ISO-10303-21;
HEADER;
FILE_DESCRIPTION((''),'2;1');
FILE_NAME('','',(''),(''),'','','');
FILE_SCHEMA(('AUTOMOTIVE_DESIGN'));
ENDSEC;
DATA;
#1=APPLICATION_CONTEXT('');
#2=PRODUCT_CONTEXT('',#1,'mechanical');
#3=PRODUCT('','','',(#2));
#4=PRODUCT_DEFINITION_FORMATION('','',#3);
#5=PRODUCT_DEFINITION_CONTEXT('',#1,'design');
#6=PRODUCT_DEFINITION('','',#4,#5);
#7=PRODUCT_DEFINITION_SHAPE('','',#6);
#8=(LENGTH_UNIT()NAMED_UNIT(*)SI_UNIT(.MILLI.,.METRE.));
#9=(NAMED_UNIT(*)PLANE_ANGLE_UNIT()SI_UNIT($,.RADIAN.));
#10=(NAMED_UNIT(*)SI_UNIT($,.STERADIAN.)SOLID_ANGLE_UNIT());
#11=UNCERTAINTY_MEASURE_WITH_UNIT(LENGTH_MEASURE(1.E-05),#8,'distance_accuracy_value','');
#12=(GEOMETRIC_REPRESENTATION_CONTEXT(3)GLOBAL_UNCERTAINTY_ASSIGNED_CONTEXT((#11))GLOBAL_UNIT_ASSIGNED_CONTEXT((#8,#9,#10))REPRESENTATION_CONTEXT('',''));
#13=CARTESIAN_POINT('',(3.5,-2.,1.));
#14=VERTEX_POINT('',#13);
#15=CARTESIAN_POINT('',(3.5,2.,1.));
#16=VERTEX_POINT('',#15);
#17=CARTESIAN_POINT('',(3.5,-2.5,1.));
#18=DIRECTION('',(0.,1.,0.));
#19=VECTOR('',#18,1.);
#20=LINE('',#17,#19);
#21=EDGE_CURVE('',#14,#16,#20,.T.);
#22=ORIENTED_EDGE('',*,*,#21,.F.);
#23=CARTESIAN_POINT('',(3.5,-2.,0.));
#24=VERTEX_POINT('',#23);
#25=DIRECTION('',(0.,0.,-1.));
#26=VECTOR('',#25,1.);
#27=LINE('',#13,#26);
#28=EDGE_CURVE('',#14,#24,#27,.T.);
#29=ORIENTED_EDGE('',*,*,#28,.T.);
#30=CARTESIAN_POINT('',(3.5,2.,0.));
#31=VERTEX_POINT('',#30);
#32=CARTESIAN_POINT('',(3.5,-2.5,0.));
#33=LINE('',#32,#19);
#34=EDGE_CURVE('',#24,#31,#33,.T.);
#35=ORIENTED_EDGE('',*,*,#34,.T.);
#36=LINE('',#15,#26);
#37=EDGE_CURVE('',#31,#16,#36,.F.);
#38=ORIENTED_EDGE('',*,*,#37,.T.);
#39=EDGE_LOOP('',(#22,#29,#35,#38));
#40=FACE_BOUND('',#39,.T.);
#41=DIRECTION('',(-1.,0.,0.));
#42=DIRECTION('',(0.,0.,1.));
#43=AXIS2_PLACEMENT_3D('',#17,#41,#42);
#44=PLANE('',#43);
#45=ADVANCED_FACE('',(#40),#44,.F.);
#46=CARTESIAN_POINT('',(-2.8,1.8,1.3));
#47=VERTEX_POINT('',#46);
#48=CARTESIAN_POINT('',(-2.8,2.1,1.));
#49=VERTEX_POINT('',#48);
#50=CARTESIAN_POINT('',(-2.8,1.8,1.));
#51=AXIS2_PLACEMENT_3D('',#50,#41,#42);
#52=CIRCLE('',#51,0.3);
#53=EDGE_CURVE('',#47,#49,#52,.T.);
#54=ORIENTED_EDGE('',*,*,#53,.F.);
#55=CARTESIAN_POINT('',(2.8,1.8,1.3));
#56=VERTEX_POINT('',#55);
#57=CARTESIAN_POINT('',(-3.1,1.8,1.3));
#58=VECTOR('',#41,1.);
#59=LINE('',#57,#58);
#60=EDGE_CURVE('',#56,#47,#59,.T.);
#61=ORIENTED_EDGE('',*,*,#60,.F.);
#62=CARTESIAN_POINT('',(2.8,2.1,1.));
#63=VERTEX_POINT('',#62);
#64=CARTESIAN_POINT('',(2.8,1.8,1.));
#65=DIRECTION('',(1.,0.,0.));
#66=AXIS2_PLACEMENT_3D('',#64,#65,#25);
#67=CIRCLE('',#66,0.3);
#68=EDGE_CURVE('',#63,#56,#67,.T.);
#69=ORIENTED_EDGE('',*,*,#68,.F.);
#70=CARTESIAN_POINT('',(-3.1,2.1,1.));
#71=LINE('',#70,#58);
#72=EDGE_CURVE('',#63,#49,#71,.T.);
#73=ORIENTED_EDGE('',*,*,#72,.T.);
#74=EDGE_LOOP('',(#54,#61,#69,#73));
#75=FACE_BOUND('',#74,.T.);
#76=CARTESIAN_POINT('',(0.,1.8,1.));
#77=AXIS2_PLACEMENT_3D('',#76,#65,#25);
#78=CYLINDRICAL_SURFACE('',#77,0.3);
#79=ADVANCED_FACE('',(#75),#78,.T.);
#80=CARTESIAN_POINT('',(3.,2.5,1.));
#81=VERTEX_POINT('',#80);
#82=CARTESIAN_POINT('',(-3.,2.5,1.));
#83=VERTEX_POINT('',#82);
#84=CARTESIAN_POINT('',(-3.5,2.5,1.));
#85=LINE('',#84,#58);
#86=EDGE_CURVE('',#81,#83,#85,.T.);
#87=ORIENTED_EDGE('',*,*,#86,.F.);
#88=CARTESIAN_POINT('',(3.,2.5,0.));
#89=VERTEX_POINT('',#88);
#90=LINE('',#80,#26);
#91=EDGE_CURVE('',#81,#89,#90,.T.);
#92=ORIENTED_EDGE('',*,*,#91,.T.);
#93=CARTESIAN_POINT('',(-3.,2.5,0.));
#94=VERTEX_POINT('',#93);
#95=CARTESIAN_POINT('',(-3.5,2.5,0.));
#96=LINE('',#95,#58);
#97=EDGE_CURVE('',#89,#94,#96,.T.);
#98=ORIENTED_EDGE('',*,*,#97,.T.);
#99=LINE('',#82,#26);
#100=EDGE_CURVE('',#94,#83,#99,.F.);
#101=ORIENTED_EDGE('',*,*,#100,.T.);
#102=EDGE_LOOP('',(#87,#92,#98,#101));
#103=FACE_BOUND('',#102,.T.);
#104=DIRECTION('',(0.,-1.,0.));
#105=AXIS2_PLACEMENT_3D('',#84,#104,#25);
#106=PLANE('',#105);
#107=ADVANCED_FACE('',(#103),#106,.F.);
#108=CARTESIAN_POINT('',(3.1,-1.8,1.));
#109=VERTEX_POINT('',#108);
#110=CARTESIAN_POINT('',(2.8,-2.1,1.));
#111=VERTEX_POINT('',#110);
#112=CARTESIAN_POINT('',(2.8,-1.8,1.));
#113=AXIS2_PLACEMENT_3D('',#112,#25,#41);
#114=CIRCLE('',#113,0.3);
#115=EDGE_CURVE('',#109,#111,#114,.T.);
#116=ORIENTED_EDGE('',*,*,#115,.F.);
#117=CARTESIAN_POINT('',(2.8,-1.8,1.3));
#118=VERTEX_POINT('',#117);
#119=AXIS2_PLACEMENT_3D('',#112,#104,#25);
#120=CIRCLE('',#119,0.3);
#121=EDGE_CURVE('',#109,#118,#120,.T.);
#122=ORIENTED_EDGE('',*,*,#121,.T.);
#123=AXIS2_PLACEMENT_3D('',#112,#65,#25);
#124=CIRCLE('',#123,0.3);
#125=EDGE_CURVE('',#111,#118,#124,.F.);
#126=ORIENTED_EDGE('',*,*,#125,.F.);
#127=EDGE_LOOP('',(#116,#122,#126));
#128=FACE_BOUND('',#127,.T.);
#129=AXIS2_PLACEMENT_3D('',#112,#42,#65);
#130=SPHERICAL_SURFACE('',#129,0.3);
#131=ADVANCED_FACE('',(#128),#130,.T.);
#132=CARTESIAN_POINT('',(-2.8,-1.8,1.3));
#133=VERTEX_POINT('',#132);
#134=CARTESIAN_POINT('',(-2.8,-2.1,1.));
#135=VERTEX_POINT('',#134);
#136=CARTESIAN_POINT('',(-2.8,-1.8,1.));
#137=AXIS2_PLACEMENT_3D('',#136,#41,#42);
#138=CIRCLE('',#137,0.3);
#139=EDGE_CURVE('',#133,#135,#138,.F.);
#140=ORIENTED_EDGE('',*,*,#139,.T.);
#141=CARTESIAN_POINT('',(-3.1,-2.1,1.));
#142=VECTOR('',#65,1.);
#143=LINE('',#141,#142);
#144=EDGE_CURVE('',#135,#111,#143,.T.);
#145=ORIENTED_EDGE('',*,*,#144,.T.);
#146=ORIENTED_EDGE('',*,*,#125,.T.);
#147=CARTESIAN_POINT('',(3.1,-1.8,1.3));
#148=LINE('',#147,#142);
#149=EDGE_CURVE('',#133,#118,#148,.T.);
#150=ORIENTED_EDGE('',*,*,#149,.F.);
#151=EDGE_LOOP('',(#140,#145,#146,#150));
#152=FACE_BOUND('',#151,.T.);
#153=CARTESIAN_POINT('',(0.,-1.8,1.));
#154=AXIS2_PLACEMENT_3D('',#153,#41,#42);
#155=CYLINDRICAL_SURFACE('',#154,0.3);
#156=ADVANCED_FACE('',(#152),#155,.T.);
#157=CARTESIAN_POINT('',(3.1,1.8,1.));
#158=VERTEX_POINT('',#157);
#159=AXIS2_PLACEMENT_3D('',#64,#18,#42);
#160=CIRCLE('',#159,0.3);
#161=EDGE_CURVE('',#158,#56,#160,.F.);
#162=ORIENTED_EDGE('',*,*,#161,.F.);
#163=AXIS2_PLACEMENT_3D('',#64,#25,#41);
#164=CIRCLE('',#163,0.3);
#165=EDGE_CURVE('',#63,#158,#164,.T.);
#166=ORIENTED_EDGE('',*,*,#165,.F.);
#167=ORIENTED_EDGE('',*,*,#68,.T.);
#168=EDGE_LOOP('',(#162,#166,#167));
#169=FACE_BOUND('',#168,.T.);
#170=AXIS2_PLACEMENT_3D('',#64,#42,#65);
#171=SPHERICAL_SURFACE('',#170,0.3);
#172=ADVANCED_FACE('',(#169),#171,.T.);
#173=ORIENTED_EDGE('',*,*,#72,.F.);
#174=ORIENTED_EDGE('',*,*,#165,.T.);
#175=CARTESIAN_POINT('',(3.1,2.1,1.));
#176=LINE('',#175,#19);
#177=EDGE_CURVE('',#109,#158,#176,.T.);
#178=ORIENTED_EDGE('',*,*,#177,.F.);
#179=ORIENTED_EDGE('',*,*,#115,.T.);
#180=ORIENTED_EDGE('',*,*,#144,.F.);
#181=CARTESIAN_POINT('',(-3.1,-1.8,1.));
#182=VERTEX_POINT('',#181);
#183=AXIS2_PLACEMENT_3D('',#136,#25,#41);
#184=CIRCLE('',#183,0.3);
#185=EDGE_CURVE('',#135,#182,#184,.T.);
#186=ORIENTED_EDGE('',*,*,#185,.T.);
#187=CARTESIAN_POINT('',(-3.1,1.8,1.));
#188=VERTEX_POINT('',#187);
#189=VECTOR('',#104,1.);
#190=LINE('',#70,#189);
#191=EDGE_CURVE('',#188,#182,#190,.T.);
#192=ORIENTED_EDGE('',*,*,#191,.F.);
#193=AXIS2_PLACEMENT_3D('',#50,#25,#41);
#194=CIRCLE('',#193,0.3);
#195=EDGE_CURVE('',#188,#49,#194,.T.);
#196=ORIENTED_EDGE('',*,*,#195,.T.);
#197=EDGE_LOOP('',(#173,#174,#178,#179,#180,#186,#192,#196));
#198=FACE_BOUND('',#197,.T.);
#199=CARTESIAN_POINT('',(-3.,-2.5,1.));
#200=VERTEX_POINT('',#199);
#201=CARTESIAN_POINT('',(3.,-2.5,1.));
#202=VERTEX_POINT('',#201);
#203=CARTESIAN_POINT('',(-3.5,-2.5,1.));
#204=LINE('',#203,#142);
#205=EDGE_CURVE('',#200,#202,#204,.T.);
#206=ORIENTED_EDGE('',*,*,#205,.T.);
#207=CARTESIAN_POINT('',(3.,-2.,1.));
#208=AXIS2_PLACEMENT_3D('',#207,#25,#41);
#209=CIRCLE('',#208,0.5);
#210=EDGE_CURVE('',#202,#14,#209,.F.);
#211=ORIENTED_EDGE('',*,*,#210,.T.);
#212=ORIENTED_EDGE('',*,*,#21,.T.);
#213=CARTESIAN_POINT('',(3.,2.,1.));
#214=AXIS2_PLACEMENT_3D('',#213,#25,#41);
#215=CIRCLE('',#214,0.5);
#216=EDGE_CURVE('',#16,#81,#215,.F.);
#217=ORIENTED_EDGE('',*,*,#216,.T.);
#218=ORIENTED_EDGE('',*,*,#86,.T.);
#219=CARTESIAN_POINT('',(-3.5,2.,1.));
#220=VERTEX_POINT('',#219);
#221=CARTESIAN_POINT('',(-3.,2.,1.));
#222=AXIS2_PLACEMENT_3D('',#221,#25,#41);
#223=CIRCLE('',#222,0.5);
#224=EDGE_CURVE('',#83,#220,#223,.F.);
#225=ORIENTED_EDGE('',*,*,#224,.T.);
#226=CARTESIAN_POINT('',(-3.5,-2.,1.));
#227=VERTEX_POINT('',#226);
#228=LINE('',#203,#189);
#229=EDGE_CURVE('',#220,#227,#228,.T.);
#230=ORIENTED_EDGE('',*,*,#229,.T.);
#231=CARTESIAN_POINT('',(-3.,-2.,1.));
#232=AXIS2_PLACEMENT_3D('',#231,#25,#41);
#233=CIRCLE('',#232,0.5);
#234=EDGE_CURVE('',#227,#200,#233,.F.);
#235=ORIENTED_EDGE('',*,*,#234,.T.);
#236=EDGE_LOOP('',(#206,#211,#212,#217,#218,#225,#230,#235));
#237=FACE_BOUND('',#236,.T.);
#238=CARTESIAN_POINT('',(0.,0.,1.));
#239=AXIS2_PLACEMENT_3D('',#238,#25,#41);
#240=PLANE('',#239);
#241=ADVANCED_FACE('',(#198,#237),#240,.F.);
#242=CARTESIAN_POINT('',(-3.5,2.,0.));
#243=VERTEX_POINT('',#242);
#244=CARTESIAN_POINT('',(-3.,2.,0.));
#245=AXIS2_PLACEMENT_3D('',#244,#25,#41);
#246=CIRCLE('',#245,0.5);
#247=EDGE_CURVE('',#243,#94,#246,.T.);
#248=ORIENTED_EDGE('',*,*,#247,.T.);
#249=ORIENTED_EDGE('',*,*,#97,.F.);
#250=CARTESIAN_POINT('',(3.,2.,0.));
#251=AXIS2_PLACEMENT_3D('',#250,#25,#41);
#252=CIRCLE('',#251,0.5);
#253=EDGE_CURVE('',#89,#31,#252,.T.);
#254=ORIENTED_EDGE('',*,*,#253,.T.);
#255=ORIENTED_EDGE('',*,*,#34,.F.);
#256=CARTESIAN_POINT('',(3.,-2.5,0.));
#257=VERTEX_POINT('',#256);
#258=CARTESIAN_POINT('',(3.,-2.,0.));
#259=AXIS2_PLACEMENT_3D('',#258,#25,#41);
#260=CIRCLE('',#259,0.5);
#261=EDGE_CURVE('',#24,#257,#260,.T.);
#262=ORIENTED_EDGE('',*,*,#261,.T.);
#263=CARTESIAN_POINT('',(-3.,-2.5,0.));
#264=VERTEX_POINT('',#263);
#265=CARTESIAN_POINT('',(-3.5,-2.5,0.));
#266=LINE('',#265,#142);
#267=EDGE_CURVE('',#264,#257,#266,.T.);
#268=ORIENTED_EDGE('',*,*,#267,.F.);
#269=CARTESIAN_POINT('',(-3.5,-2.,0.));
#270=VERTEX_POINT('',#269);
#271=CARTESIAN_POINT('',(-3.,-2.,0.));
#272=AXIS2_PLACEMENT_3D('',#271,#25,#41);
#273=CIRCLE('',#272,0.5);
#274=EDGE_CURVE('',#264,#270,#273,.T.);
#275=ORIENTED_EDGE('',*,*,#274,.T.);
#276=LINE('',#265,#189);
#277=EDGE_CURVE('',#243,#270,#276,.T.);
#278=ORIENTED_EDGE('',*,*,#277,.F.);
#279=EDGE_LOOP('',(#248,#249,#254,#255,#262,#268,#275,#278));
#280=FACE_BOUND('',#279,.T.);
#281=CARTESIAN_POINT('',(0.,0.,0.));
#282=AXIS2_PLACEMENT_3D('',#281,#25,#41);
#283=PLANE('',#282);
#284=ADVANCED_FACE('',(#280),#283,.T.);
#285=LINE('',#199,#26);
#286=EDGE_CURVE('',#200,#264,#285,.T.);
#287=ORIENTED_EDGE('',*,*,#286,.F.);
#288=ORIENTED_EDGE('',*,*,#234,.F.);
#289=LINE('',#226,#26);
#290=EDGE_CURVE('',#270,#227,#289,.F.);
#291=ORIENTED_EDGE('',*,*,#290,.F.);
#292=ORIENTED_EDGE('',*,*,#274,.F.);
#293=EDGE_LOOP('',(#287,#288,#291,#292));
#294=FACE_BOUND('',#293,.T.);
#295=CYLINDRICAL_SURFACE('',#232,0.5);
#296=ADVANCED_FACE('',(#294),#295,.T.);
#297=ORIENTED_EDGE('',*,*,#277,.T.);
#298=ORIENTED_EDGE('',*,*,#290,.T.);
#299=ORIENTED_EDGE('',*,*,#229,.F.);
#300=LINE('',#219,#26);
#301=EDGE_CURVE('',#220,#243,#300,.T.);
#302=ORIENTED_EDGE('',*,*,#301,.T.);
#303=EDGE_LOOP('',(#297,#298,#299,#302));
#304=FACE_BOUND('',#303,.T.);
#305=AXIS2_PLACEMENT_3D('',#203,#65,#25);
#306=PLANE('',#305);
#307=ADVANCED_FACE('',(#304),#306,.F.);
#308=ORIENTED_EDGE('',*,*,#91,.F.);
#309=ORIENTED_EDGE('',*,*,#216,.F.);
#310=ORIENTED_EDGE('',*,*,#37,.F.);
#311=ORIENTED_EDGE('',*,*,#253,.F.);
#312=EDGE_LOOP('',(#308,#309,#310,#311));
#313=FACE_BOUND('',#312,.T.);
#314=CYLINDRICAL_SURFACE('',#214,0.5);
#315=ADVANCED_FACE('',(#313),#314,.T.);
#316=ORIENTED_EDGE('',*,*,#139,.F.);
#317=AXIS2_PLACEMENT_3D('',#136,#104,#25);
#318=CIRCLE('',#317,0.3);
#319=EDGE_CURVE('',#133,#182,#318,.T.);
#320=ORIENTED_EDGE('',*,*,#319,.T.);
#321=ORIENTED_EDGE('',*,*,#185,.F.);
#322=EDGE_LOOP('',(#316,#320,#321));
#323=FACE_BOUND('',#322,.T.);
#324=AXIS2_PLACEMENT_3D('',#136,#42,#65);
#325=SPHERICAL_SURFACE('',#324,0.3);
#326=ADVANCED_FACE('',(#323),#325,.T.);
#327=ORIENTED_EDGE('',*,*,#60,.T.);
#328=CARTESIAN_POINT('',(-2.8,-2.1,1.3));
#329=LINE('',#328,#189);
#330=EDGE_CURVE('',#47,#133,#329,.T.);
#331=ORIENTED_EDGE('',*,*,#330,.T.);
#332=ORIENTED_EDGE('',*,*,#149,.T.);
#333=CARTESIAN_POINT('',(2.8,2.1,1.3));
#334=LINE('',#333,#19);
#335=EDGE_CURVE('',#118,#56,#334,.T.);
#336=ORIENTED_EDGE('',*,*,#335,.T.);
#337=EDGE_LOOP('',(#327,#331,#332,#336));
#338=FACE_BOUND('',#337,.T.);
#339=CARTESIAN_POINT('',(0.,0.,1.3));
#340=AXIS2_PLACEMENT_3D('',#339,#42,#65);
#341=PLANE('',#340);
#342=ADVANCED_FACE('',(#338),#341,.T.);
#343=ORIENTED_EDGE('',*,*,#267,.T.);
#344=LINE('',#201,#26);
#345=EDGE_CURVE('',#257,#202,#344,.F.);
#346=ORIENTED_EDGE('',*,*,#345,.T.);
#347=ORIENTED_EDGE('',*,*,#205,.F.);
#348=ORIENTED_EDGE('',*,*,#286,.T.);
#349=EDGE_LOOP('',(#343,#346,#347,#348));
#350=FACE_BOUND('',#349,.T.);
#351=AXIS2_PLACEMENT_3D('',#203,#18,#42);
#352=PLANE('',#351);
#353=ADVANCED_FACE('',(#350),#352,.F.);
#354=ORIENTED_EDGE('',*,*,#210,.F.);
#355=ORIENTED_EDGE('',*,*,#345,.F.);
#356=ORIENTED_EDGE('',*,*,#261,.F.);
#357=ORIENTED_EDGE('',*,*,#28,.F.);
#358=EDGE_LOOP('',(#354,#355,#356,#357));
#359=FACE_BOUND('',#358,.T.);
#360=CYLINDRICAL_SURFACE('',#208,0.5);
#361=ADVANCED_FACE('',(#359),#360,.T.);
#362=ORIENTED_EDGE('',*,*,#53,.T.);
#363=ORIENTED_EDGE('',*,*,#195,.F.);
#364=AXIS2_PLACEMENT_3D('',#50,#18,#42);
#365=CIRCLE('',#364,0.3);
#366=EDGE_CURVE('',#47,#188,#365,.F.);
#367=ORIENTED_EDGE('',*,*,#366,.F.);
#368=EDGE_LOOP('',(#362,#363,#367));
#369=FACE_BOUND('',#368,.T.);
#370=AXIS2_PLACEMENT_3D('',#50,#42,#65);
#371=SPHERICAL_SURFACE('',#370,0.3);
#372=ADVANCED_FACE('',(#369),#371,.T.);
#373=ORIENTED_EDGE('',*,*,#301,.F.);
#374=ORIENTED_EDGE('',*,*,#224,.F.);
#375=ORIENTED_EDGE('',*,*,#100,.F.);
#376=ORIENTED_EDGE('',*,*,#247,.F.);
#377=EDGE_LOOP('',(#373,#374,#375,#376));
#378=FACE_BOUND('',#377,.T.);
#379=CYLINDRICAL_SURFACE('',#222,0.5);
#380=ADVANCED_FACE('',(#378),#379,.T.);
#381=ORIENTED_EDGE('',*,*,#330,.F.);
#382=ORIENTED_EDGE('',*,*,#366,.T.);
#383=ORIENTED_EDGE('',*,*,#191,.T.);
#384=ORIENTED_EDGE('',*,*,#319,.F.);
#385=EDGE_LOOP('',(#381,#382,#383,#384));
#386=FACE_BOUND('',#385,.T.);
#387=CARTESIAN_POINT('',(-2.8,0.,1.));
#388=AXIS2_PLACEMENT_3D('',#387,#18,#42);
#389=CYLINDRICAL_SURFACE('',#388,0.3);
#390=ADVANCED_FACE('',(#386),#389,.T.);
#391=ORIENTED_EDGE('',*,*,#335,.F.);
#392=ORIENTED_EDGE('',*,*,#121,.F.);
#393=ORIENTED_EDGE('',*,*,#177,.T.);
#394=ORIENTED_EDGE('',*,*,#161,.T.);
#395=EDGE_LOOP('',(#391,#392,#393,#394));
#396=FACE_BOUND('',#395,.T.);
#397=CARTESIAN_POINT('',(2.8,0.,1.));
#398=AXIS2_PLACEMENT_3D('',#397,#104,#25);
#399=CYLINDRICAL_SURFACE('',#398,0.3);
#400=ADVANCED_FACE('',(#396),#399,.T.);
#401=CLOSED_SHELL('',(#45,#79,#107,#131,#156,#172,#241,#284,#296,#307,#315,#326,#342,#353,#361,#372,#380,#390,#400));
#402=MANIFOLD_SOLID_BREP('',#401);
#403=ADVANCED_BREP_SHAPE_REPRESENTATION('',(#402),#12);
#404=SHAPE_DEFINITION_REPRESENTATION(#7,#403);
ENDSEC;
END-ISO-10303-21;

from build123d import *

# Parameters (mm, degrees)
SKETCH_1_W      = 7
SKETCH_1_H      = 5
EXTRUDE_1_DEPTH = 1
FILLET_1_R      = 0.5
SKETCH_2_W      = 6.2
SKETCH_2_H      = 4.2
EXTRUDE_2_DEPTH = 0.3
FILLET_2_R      = 0.3


with BuildPart() as part:
    # Эскиз1 → Бобышка-Вытянуть1 (new body)
    with BuildSketch(Plane.XY):
        Rectangle(SKETCH_1_W, SKETCH_1_H)
    extrude(amount=EXTRUDE_1_DEPTH)

    # Скругление1
    fillet_1_edges = [part.edges().sort_by_distance(p)[0] for p in [
        (3.5, -2.5, 0.5),
        (-3.5, -2.5, 0.5),
        (-3.5, 2.5, 0.5),
        (3.5, 2.5, 0.5),
    ]]
    fillet(fillet_1_edges, radius=FILLET_1_R)

    # Эскиз2 → Бобышка-Вытянуть2 (add)
    with BuildSketch(Plane.XY.offset(1)):
        Rectangle(SKETCH_2_W, SKETCH_2_H)
    extrude(amount=EXTRUDE_2_DEPTH)

    # Скругление2
    fillet_2_edges = [part.edges().sort_by_distance(p)[0] for p in [
        (3.1, -2.1, 1.15),
        (3.1, 2.1, 1.15),
        (-3.1, 2.1, 1.15),
        (-3.1, -2.1, 1.15),
        (3.1, 0, 1.3),
        (0, 2.1, 1.3),
        (-3.1, 0, 1.3),
        (0, -2.1, 1.3),
    ]]
    fillet(fillet_2_edges, radius=FILLET_2_R - 0.0001)  # a hair under: the kernel refuses the full size


solid = part.part
